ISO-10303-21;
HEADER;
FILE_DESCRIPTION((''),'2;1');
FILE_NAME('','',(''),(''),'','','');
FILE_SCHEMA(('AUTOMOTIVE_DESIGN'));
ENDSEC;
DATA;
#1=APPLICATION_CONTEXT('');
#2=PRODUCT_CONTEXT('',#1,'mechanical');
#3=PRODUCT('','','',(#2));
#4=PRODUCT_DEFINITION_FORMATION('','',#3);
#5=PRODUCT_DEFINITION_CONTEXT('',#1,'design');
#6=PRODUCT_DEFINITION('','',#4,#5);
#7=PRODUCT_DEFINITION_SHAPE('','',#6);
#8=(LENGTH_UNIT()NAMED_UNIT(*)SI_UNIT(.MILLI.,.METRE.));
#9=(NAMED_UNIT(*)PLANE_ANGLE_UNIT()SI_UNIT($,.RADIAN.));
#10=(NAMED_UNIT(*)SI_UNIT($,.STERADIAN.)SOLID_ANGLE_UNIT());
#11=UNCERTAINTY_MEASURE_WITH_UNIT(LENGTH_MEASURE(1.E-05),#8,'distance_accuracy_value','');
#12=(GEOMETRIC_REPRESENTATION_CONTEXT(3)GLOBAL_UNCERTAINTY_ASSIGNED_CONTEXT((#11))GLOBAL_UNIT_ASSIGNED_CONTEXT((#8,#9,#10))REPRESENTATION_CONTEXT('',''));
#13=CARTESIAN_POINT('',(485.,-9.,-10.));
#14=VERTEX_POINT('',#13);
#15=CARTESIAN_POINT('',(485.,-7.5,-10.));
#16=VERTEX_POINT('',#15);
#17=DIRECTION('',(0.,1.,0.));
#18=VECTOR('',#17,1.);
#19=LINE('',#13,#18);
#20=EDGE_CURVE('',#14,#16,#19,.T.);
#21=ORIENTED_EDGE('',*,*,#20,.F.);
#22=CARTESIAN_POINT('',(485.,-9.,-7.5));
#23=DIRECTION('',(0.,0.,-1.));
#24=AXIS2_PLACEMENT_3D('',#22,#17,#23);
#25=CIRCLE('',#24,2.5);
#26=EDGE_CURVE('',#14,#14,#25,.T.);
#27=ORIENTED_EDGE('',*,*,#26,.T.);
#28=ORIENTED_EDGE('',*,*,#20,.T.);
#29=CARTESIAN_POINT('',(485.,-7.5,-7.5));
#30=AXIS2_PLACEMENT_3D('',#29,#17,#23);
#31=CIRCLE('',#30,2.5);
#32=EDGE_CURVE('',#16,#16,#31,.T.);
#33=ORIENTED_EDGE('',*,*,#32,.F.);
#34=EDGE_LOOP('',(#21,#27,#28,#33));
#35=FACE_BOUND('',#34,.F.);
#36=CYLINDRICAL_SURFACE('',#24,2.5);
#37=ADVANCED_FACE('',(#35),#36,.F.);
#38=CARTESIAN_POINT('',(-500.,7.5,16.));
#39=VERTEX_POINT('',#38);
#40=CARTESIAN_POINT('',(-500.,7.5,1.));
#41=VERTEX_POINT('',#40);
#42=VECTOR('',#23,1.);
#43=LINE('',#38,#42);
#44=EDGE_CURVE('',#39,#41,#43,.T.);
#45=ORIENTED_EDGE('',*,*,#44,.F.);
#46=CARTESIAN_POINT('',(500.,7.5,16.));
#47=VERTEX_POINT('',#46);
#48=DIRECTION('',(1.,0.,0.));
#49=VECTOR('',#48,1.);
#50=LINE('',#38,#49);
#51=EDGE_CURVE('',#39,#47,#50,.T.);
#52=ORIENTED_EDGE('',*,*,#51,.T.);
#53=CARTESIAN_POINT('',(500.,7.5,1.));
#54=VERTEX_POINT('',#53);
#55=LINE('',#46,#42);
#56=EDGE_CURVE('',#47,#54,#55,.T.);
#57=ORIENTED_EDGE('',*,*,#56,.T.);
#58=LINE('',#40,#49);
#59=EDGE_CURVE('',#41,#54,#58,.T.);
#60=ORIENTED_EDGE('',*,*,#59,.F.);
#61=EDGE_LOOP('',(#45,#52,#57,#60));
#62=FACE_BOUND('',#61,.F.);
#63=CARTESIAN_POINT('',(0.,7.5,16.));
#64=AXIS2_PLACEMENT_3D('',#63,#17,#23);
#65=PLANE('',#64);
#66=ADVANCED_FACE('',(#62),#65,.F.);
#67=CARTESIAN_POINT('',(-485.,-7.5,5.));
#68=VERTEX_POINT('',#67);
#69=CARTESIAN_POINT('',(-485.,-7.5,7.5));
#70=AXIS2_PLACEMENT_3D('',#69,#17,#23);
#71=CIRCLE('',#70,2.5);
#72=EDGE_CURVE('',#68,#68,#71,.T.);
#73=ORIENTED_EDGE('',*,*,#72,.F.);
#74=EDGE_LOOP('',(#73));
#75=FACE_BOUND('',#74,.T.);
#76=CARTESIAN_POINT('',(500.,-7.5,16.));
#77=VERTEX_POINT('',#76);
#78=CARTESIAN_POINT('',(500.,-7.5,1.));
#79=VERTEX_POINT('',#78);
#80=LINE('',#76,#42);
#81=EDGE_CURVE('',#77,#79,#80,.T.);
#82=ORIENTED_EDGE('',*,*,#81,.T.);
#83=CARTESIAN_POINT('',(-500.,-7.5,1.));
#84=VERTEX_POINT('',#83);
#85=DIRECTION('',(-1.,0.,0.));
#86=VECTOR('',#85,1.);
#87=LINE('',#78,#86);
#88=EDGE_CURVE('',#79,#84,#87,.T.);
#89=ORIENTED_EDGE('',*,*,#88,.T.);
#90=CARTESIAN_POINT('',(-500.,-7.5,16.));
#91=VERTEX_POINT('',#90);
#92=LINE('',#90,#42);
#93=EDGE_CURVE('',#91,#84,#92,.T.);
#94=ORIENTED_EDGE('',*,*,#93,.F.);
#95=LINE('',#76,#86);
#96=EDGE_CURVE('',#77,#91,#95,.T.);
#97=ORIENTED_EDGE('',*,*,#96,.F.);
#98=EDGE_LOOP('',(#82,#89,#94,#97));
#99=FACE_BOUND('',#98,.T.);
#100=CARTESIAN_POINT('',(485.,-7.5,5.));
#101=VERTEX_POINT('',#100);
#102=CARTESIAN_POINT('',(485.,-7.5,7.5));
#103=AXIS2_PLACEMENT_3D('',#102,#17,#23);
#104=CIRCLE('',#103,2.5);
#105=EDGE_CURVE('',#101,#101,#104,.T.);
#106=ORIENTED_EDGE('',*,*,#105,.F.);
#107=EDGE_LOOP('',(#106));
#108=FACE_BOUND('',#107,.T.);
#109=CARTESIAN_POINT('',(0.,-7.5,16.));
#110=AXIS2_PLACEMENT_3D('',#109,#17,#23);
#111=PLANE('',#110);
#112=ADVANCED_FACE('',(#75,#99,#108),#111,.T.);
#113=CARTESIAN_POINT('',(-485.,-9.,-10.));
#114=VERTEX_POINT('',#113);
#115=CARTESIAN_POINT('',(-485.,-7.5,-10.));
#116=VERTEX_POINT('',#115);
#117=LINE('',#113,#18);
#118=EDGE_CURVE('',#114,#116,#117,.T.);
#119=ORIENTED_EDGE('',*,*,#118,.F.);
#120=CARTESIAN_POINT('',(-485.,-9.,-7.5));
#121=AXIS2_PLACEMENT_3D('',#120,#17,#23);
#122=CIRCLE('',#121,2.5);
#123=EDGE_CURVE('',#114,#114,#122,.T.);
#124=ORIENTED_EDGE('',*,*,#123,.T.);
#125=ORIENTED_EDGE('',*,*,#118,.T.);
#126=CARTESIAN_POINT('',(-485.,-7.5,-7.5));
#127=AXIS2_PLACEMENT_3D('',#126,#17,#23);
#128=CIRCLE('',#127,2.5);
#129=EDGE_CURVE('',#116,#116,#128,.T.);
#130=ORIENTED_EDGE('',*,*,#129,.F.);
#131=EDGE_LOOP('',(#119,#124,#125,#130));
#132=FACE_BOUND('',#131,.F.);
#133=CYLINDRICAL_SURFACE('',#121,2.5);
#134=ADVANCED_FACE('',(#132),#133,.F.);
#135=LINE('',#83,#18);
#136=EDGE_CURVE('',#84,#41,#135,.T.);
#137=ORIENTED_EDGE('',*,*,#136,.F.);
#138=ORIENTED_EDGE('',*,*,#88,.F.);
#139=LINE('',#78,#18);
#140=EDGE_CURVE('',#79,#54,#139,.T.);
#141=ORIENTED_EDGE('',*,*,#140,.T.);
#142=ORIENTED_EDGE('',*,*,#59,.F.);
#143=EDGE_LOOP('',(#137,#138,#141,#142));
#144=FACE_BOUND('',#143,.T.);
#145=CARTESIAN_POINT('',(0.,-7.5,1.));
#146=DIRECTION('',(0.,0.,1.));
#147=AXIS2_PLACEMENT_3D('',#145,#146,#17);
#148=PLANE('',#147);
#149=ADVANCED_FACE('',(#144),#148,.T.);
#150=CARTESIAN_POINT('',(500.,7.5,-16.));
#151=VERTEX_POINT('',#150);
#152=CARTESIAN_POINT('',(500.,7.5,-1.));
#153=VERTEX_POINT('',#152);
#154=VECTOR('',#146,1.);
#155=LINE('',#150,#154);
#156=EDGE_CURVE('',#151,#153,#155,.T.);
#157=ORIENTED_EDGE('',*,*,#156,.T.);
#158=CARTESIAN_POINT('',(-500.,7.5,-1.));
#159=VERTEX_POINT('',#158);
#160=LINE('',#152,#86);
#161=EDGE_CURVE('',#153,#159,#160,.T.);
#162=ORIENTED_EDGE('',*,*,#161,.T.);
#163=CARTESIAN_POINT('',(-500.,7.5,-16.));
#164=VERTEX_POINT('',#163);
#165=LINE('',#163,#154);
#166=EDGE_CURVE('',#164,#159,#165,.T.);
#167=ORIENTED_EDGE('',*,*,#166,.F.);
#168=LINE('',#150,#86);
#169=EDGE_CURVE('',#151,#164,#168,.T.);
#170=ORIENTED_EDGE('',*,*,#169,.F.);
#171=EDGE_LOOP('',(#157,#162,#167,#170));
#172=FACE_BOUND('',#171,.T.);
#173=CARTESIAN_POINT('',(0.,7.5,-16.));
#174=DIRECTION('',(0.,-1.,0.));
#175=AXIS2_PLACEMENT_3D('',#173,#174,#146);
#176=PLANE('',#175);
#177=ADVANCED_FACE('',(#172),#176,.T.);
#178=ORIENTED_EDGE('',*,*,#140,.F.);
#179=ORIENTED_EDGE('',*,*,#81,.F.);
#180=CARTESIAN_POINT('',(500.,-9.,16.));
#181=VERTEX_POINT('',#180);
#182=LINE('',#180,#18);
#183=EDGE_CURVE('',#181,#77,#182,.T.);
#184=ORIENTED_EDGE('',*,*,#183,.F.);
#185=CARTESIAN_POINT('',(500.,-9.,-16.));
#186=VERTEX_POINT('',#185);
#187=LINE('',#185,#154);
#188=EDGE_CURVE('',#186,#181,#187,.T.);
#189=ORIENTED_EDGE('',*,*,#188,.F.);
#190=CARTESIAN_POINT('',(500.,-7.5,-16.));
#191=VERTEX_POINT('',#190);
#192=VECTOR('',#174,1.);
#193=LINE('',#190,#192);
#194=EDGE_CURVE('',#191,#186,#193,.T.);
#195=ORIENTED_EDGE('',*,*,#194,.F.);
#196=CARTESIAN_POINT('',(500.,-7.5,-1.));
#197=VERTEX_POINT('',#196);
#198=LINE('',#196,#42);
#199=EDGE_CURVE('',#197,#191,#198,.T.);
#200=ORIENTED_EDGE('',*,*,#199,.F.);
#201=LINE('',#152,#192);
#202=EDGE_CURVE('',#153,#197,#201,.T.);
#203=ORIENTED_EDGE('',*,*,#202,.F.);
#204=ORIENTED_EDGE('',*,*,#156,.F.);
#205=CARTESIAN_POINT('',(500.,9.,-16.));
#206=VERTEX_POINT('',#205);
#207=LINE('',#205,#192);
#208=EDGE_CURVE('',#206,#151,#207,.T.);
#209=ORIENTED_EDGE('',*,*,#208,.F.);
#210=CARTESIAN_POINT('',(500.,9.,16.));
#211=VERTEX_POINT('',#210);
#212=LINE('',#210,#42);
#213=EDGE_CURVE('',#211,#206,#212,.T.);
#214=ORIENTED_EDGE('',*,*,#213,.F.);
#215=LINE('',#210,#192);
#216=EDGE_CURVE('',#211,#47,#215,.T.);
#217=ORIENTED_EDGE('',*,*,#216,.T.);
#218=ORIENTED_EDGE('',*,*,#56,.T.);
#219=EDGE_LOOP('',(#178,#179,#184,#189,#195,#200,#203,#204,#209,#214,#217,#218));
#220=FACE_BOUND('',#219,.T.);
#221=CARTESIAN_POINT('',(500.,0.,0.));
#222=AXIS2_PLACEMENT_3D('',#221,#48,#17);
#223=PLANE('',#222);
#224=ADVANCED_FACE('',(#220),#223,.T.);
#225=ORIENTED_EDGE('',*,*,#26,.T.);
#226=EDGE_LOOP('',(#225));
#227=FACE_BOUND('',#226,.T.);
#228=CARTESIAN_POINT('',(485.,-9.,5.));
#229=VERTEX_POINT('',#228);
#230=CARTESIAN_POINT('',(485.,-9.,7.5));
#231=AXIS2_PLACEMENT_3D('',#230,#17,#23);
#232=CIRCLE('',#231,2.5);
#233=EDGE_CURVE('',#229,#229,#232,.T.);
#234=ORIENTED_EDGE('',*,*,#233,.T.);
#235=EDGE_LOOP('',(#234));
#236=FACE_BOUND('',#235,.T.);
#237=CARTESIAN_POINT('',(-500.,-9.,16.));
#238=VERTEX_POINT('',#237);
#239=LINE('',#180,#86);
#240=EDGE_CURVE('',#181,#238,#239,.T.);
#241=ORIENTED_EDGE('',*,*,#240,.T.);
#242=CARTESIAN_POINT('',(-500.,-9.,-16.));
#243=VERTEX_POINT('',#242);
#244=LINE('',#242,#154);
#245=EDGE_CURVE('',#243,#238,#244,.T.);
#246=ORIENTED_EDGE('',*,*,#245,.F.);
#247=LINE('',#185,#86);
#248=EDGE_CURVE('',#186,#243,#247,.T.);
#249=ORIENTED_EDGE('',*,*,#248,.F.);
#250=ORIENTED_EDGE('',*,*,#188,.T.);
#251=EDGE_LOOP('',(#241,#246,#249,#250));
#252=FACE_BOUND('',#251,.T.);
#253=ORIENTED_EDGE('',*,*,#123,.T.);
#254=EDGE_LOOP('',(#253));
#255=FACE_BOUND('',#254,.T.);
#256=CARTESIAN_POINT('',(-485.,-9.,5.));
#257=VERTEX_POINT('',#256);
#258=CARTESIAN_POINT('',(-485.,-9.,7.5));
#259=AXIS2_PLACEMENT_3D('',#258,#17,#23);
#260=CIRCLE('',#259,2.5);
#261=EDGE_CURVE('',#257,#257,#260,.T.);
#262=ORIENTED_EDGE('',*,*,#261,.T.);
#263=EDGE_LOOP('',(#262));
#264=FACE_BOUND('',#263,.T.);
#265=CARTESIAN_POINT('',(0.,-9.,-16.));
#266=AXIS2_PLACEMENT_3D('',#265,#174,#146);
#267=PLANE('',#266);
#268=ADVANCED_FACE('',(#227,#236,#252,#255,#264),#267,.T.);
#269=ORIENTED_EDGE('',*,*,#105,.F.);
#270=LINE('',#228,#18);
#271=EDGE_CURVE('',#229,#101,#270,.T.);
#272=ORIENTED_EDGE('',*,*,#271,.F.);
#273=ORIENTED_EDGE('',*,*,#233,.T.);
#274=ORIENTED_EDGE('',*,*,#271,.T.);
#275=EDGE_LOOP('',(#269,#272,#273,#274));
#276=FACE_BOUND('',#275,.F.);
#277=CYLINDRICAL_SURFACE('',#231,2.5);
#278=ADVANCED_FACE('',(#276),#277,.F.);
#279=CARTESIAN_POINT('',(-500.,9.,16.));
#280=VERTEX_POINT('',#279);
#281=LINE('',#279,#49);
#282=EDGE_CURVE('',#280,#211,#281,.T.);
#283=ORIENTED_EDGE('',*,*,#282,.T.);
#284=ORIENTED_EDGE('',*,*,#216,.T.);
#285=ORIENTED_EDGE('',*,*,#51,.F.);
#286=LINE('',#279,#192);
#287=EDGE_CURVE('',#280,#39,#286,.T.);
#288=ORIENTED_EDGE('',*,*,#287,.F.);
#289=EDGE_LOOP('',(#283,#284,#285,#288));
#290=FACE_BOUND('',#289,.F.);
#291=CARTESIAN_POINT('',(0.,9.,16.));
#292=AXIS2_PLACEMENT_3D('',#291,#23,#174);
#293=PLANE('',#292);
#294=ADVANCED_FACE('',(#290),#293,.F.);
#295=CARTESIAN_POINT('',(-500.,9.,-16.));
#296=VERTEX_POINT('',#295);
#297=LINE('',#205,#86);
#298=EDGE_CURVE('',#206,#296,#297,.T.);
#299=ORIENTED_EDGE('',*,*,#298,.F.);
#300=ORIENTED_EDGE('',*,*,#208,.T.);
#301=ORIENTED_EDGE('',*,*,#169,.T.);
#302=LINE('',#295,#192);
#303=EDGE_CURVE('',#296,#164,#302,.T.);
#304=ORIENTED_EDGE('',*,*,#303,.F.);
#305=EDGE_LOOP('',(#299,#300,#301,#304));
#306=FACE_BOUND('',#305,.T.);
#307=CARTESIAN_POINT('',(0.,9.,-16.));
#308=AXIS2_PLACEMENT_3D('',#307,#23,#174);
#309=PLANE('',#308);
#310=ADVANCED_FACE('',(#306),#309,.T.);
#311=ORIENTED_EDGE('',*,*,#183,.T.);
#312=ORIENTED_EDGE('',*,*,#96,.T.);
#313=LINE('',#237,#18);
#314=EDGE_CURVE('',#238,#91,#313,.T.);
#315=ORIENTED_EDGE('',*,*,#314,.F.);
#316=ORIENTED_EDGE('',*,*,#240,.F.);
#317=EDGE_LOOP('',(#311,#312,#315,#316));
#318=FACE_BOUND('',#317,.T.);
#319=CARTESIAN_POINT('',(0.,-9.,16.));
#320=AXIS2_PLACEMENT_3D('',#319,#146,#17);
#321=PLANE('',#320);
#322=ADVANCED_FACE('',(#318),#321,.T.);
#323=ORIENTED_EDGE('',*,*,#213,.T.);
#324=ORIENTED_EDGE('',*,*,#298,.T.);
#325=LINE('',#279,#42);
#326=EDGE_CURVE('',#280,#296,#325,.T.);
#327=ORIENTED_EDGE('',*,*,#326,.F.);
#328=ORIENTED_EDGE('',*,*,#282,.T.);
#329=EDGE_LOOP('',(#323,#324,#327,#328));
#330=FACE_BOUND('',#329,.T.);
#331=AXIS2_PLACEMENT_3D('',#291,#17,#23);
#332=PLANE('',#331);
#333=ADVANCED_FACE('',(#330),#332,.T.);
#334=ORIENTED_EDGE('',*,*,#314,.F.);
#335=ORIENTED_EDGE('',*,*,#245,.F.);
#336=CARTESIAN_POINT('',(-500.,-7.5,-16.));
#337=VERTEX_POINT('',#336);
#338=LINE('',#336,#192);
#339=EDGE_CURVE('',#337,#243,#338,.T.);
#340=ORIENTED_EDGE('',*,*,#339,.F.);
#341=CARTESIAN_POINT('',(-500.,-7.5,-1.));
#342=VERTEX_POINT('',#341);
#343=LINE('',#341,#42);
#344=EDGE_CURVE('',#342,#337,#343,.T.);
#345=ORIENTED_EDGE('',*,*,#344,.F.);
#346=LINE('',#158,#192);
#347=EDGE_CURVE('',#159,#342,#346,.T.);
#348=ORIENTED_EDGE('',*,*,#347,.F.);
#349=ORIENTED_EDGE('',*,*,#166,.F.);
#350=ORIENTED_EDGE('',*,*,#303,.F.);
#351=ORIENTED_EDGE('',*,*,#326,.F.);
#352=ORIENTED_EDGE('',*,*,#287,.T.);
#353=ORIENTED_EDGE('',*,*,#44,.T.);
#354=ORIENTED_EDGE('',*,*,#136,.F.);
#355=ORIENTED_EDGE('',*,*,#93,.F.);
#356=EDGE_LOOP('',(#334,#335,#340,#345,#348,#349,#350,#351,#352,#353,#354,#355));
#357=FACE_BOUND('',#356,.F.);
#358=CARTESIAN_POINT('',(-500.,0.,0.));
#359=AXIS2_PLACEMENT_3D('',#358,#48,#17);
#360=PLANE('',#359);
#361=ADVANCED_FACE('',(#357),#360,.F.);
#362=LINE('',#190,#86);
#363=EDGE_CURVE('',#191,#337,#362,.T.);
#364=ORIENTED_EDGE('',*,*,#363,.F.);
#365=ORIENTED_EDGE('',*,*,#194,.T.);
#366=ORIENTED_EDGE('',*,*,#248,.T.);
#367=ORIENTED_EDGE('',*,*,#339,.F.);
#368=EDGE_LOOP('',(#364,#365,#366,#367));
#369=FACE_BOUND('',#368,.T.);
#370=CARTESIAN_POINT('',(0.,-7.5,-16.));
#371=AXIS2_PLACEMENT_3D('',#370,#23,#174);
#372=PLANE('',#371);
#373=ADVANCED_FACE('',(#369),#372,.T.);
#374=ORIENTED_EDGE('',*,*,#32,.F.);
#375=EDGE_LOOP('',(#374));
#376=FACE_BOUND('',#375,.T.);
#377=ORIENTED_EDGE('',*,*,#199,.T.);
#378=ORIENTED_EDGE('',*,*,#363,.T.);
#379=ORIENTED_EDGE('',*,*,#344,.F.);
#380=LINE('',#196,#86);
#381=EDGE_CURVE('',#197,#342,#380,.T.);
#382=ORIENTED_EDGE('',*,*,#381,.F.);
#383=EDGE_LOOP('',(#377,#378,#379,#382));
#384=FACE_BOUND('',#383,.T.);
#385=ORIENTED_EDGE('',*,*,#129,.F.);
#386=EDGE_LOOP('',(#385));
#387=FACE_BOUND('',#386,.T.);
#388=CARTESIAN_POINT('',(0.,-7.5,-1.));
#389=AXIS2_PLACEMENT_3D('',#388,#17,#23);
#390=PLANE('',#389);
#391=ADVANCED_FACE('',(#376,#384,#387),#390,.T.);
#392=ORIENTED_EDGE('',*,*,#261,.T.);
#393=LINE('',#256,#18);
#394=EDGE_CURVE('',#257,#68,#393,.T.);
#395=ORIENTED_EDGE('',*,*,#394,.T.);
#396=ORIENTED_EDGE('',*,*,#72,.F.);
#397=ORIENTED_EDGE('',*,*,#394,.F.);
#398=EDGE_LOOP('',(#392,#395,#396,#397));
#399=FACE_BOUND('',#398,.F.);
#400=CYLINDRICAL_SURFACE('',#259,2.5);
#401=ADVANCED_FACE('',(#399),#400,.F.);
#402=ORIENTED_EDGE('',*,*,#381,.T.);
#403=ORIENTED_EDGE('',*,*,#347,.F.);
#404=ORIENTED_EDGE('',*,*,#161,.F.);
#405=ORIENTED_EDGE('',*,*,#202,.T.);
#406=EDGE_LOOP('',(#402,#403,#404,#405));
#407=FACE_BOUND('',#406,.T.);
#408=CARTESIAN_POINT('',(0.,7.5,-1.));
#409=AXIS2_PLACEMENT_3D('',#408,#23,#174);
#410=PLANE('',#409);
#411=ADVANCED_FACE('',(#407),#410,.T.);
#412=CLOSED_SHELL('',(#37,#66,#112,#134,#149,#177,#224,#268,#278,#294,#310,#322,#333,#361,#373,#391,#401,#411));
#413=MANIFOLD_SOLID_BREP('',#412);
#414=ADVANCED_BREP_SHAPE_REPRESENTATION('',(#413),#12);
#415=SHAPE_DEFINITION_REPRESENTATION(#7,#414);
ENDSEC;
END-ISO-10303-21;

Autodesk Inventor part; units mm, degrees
ref_plane "YZ Plane" through (0, 0, 0) normal (1, 0, 0) x (0, 1, 0)
ref_plane "XZ Plane" through (0, 0, 0) normal (0, 1, 0) x (-1, 0, 0)
ref_plane "XY Plane" through (0, 0, 0) normal (0, 0, 1) x (1, 0, 0)
sketch "Skizze1" plane through (0, 0, 0) normal (1, 0, 0) x (0, 1, 0)
  line L0 (9, 16) -> (9, -16)
  line L1 (9, -16) -> (7.5, -16)
  line L2 (7.5, -16) -> (7.5, -1)
  line L3 (7.5, -1) -> (-7.5, -1)
  line L4 (-7.5, -1) -> (-7.5, -16)
  line L5 (-7.5, -16) -> (-9, -16)
  line L6 (-9, -16) -> (-9, 16)
  line L7 (-9, 16) -> (-7.5, 16)
  line L8 (-7.5, 16) -> (-7.5, 1)
  line L9 (-7.5, 1) -> (7.5, 1)
  line L10 (9, 16) -> (7.5, 16)
  line L11 (7.5, 16) -> (7.5, 1)
  line L12 (0, 0) -> (9, 0) construction
  line L13 (0, 0) -> (-9, 0) construction
  line L14 (0, 0) -> (0, 16) construction
  line L15 (0, 0) -> (0, -16) construction
  dimension "d0" = 2
  dimension "d1" = 1.5
  dimension "d2" = 32
  dimension "d3" = 18
extrude "Extrusion1" add sketch "Skizze1" along normal mid plane 1000
sketch "Skizze2" plane through (-500, -9, 16) normal (0, 1, 0) x (1, 0, 0)
  line L0 (985, 23.5) -> (985, 8.5)
  line L1 (15, 23.5) -> (15, 8.5)
  line L2 (15, 16) -> (0, 16)
  line L3 (0, 0) -> (0, 32) projected
  line L4 (1000, 32) -> (1000, 0) projected
  line L5 (985, 16) -> (1000, 16)
  point P0 (500, 16)
  dimension "d6" = 15
  dimension "d8" = 15
  dimension "d9" = 15
  dimension "d17" = 8.5
  dimension "d18" = 15
hole "Bohrung1" at (485, -9, -7.5) at (485, -9, 7.5) at (-485, -9, -7.5) at (-485, -9, 7.5) direction (0, 1, 0) diameter 5 depth 1.5
properties part number "Träger" material "Aluminium 6061, Träger"
